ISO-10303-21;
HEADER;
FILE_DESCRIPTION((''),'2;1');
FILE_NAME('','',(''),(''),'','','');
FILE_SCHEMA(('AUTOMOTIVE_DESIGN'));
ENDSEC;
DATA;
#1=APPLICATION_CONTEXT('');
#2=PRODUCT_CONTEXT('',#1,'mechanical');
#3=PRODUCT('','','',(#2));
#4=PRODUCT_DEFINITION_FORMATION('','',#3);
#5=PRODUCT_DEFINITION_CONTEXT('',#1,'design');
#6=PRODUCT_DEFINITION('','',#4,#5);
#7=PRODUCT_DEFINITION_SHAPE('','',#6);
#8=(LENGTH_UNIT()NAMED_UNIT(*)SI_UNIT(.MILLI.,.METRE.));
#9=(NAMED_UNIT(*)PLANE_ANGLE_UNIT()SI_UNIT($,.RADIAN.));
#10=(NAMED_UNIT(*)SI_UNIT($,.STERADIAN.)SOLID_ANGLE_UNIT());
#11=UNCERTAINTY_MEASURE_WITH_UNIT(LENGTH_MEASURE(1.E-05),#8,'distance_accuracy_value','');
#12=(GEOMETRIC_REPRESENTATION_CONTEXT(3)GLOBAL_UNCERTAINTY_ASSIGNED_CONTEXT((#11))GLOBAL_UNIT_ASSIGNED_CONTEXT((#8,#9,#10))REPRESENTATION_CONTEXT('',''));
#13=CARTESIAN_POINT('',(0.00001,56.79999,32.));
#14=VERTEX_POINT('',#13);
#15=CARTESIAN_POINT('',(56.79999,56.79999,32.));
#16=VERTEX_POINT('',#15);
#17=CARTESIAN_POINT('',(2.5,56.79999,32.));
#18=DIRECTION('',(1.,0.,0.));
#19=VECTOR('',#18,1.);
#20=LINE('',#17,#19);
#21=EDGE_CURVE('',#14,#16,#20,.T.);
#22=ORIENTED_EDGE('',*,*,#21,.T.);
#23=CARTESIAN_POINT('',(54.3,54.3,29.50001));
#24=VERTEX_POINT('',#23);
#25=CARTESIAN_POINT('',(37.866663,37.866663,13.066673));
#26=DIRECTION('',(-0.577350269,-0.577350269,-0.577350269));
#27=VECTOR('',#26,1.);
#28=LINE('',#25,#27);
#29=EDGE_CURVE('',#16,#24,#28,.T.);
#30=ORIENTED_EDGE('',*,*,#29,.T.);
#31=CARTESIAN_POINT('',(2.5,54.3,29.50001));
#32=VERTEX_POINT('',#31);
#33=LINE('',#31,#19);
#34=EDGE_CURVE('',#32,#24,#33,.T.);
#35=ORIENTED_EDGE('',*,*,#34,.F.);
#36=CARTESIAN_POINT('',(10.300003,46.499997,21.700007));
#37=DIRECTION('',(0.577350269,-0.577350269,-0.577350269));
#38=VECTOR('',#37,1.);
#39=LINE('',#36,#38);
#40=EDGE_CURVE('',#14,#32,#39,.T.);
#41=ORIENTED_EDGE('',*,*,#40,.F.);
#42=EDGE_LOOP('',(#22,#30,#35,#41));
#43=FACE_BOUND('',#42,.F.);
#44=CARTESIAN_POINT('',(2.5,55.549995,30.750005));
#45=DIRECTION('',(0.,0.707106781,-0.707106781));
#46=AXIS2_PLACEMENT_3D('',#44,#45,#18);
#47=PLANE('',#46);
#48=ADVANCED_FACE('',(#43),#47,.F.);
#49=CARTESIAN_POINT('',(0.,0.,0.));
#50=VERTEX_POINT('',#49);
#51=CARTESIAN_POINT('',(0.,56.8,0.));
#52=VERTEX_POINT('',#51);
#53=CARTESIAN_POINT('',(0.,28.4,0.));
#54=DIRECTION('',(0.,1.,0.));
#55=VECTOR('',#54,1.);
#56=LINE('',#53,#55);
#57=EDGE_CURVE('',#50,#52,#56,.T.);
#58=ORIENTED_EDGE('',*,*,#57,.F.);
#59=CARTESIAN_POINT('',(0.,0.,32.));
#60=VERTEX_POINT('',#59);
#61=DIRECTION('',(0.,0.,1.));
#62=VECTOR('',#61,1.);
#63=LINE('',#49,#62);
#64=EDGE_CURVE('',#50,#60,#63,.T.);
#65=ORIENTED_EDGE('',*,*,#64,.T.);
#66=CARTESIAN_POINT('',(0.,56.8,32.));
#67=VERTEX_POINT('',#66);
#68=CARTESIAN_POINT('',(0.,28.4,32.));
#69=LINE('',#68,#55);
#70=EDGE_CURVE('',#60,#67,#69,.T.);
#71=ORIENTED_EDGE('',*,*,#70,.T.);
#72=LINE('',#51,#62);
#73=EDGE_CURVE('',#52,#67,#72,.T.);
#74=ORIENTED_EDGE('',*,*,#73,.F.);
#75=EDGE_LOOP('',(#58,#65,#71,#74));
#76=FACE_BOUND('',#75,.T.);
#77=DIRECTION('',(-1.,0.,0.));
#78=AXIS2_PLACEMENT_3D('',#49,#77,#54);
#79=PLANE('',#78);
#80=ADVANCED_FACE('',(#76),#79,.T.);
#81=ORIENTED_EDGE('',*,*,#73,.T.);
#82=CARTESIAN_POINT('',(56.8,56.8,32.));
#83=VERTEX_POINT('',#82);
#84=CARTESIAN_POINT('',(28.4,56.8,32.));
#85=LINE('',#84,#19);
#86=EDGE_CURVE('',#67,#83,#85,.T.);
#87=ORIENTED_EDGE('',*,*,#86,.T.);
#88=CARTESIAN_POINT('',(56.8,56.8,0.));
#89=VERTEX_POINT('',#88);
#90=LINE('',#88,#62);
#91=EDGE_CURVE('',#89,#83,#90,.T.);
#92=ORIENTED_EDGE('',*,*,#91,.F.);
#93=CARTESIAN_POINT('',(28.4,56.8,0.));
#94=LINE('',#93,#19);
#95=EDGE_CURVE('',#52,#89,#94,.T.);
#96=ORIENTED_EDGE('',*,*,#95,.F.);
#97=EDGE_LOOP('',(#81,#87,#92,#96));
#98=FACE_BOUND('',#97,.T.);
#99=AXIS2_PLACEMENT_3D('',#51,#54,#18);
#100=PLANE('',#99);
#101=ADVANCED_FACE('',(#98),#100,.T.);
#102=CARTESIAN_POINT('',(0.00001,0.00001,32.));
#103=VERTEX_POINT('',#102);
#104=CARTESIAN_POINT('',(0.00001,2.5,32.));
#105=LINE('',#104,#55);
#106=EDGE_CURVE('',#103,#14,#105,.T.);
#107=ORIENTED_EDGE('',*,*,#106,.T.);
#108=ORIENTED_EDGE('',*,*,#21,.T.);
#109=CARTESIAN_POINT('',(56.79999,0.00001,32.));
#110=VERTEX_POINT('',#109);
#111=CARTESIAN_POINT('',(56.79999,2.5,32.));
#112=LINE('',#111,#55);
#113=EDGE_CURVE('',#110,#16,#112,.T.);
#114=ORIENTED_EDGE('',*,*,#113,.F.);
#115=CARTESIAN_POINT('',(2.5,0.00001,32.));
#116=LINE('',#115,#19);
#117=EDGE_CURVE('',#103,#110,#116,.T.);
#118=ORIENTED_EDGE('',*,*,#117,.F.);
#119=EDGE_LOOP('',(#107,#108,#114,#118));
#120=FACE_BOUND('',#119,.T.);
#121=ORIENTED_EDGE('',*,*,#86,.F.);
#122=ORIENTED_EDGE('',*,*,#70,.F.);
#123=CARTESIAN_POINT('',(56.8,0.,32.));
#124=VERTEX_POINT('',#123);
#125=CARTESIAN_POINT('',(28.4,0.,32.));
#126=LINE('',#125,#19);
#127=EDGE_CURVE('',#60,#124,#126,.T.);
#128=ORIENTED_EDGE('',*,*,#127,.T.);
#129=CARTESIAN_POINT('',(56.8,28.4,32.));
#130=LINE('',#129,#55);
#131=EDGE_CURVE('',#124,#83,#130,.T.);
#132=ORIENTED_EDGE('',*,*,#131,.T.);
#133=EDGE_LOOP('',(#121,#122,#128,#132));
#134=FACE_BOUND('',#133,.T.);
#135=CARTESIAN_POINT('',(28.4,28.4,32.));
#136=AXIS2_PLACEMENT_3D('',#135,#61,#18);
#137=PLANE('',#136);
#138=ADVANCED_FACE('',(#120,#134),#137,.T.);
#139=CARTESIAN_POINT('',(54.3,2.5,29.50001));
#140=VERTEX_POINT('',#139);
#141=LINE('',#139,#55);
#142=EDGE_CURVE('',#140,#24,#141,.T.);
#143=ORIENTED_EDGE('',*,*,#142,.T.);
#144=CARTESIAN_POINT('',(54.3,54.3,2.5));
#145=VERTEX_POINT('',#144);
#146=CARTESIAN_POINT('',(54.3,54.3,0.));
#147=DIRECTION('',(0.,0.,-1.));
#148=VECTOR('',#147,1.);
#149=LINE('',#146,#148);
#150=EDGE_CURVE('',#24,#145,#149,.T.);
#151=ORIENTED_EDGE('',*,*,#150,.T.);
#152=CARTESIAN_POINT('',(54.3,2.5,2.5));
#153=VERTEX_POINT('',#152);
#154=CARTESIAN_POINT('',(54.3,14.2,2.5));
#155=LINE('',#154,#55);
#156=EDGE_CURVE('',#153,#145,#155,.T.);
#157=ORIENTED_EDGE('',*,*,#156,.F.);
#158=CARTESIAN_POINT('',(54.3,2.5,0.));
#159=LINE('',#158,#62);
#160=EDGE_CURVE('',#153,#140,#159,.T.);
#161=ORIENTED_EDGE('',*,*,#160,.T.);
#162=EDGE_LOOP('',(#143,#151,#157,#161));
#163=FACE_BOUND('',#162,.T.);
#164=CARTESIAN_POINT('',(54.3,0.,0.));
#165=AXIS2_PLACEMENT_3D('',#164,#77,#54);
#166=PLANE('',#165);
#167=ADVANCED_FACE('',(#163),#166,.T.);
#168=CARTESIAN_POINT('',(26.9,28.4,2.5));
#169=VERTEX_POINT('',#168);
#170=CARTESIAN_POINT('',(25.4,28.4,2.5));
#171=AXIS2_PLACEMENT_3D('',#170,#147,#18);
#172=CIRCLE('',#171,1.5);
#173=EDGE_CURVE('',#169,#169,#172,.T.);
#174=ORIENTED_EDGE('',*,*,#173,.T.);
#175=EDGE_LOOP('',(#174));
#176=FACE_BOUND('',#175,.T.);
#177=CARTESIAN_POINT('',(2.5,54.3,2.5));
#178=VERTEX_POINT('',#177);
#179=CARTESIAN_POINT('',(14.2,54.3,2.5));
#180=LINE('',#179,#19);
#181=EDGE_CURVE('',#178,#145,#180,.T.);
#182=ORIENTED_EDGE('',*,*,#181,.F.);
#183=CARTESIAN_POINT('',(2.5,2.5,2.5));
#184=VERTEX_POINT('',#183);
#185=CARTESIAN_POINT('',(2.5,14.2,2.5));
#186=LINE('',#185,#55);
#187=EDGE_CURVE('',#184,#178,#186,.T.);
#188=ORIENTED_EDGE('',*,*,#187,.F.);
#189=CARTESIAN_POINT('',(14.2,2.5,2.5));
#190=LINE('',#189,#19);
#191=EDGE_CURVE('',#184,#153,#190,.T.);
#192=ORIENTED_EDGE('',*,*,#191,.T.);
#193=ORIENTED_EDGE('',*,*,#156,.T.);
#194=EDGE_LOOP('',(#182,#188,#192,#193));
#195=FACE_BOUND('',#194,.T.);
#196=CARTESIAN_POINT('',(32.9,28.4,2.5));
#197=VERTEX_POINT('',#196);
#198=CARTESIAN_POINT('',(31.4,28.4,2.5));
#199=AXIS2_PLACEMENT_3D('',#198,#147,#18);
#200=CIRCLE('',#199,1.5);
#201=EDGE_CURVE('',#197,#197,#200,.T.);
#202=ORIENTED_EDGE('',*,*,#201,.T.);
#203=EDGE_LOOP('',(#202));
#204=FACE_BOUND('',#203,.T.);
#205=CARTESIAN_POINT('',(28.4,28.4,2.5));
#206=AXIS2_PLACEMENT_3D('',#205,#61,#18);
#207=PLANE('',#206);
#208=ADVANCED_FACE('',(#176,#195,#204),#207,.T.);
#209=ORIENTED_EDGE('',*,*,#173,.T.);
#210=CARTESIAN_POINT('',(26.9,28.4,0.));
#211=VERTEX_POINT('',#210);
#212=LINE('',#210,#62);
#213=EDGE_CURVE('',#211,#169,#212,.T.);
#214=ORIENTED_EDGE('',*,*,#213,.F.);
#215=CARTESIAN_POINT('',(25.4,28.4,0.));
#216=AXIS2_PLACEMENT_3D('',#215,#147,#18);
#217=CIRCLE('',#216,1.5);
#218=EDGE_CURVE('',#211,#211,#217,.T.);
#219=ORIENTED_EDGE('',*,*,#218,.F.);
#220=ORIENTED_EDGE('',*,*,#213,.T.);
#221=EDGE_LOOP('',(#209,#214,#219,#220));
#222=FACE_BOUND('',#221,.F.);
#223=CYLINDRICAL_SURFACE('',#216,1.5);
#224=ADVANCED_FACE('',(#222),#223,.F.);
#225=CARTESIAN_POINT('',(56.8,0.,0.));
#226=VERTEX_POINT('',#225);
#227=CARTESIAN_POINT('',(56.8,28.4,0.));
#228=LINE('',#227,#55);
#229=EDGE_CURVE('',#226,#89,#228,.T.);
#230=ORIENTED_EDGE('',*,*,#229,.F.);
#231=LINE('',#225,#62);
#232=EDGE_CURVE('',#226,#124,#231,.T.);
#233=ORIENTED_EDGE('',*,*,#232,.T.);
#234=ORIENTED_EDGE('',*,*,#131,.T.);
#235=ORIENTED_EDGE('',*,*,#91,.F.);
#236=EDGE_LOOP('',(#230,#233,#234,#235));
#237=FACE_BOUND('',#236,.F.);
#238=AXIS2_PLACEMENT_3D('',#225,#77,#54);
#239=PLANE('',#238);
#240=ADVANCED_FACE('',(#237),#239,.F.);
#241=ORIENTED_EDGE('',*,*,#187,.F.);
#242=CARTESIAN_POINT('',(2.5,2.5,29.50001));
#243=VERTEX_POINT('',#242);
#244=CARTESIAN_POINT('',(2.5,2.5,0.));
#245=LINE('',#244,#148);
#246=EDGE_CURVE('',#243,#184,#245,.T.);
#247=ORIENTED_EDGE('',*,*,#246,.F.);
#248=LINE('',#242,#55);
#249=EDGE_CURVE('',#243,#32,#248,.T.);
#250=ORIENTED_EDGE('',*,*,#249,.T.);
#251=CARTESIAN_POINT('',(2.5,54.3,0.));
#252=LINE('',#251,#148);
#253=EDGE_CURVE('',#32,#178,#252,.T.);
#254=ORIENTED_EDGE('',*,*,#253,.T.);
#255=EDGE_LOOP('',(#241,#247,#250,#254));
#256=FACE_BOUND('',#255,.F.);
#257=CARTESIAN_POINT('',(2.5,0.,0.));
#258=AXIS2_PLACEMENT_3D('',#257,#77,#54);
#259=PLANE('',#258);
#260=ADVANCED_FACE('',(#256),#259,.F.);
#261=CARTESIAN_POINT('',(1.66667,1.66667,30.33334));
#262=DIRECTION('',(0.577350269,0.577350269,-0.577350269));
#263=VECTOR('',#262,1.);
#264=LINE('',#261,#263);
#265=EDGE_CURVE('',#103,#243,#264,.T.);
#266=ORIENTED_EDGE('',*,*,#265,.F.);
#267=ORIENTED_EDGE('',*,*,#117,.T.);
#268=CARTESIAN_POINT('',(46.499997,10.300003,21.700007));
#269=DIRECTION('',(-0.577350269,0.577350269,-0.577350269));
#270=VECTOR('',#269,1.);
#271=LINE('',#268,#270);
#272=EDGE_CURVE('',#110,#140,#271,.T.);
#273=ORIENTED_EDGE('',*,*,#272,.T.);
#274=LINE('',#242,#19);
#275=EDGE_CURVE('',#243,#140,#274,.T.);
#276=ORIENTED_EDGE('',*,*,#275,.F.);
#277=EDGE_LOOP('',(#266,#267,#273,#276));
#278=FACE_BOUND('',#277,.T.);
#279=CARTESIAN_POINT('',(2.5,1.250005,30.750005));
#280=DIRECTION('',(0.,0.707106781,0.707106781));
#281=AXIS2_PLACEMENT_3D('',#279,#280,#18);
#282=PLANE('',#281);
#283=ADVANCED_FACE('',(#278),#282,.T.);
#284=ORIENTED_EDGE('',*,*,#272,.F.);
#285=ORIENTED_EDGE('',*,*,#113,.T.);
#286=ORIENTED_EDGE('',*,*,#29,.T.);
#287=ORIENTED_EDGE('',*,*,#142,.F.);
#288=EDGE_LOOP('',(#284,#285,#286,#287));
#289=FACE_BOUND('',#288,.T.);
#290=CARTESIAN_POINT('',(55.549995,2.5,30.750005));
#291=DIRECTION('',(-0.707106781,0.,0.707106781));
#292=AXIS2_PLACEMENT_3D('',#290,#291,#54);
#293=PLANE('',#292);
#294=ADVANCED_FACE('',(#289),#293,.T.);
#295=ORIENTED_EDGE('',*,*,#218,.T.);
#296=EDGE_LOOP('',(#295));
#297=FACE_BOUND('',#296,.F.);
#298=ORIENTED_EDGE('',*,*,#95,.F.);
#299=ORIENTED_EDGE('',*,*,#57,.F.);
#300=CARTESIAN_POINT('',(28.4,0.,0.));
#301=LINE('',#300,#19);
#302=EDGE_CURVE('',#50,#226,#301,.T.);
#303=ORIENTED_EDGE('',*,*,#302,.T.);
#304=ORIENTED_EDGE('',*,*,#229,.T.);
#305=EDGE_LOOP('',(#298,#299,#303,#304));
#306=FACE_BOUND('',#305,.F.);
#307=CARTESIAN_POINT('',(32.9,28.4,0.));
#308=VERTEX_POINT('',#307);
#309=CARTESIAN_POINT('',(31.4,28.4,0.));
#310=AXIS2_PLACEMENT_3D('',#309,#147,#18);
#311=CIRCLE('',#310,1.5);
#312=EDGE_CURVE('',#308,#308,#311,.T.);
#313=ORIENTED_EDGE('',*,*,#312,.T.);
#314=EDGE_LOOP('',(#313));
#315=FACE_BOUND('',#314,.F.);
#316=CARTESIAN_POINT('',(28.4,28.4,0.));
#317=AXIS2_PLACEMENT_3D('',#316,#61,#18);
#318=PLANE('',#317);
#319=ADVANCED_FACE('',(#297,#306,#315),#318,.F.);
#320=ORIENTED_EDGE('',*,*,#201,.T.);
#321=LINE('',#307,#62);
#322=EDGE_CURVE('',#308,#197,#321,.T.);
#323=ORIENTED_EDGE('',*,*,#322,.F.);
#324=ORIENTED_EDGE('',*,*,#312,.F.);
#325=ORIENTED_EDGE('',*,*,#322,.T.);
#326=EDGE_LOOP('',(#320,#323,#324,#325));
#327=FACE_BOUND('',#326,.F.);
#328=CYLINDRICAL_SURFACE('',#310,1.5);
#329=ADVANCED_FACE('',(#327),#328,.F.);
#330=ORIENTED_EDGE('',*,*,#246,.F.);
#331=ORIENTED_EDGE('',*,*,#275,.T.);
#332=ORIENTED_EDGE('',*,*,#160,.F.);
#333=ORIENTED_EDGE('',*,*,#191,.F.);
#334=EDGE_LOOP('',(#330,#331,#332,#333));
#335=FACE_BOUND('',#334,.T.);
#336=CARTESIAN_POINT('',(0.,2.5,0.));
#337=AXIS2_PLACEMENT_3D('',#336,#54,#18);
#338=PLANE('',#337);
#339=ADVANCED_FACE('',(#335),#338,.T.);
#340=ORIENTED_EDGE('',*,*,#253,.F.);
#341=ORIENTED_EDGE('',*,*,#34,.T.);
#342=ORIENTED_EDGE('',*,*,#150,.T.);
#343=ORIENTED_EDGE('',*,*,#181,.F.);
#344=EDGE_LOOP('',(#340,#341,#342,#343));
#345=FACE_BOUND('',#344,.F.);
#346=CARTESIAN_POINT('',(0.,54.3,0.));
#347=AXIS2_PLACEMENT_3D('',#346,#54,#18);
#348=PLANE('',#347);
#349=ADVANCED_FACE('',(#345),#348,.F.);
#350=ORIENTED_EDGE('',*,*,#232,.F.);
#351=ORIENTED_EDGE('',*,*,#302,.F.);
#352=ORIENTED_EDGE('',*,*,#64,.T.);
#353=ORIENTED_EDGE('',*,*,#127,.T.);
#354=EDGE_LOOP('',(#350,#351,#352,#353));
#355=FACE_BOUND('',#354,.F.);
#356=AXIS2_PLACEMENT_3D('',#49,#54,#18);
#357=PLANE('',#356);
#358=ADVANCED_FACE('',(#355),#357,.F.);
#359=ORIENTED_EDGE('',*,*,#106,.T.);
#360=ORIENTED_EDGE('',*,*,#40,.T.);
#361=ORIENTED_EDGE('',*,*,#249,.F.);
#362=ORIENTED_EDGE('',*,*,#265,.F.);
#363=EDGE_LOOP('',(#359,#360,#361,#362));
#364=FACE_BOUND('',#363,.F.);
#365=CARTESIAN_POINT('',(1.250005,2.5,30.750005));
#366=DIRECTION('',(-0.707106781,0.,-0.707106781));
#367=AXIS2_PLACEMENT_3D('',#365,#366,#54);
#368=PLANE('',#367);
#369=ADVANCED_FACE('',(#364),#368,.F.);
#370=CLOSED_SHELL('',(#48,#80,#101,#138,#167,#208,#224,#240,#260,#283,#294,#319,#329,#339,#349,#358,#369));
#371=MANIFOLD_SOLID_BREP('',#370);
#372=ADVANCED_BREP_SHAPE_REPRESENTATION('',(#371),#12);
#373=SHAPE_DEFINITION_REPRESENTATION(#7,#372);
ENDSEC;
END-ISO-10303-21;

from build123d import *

# Parameters (mm, degrees)
F0_W     = 56.8
F0_H     = 56.8
F1_DEPTH = 32
F2_T     = -2.5
F3_R     = 1.5
F4_DEPTH = 2.5
F5_SIZE  = 2.49999


# Not quite as in the source:
# - a fillet or chamfer is up to 0.001 mm smaller than in the source, because OpenCascade refuses the exact size


with BuildPart() as f1:
    # F0 (on Top) → F1 (new body)
    with BuildSketch(Plane.XY):
        with Locations((28.4, 28.4)):
            Rectangle(F0_W, F0_H)
    extrude(amount=F1_DEPTH)

    # F2
    f2_openings = [f1.faces().sort_by_distance(p)[0] for p in [
        (28.4, 28.4, 32),
    ]]
    offset(amount=F2_T, openings=f2_openings)

    # F3 (on face) → F4 (cut, through all)
    with BuildSketch(Plane(origin=(0, 0, 0), x_dir=(1, 0, 0), z_dir=(0, 0, -1))):
        with Locations((25.4, -28.4)):
            Circle(F3_R)
        with Locations((31.4, -28.4)):
            Circle(F3_R)
    extrude(amount=-F4_DEPTH, mode=Mode.SUBTRACT)

    # F5 (size 2.5 in the source; OpenCascade refuses exactly that, so slightly less here)
    f5_edges = [f1.edges().sort_by_distance(p)[0] for p in [
        (2.5, 28.4, 32),
        (28.4, 2.5, 32),
        (54.3, 28.4, 32),
        (28.4, 54.3, 32),
    ]]
    chamfer(f5_edges, length=F5_SIZE)


solid = f1.part
